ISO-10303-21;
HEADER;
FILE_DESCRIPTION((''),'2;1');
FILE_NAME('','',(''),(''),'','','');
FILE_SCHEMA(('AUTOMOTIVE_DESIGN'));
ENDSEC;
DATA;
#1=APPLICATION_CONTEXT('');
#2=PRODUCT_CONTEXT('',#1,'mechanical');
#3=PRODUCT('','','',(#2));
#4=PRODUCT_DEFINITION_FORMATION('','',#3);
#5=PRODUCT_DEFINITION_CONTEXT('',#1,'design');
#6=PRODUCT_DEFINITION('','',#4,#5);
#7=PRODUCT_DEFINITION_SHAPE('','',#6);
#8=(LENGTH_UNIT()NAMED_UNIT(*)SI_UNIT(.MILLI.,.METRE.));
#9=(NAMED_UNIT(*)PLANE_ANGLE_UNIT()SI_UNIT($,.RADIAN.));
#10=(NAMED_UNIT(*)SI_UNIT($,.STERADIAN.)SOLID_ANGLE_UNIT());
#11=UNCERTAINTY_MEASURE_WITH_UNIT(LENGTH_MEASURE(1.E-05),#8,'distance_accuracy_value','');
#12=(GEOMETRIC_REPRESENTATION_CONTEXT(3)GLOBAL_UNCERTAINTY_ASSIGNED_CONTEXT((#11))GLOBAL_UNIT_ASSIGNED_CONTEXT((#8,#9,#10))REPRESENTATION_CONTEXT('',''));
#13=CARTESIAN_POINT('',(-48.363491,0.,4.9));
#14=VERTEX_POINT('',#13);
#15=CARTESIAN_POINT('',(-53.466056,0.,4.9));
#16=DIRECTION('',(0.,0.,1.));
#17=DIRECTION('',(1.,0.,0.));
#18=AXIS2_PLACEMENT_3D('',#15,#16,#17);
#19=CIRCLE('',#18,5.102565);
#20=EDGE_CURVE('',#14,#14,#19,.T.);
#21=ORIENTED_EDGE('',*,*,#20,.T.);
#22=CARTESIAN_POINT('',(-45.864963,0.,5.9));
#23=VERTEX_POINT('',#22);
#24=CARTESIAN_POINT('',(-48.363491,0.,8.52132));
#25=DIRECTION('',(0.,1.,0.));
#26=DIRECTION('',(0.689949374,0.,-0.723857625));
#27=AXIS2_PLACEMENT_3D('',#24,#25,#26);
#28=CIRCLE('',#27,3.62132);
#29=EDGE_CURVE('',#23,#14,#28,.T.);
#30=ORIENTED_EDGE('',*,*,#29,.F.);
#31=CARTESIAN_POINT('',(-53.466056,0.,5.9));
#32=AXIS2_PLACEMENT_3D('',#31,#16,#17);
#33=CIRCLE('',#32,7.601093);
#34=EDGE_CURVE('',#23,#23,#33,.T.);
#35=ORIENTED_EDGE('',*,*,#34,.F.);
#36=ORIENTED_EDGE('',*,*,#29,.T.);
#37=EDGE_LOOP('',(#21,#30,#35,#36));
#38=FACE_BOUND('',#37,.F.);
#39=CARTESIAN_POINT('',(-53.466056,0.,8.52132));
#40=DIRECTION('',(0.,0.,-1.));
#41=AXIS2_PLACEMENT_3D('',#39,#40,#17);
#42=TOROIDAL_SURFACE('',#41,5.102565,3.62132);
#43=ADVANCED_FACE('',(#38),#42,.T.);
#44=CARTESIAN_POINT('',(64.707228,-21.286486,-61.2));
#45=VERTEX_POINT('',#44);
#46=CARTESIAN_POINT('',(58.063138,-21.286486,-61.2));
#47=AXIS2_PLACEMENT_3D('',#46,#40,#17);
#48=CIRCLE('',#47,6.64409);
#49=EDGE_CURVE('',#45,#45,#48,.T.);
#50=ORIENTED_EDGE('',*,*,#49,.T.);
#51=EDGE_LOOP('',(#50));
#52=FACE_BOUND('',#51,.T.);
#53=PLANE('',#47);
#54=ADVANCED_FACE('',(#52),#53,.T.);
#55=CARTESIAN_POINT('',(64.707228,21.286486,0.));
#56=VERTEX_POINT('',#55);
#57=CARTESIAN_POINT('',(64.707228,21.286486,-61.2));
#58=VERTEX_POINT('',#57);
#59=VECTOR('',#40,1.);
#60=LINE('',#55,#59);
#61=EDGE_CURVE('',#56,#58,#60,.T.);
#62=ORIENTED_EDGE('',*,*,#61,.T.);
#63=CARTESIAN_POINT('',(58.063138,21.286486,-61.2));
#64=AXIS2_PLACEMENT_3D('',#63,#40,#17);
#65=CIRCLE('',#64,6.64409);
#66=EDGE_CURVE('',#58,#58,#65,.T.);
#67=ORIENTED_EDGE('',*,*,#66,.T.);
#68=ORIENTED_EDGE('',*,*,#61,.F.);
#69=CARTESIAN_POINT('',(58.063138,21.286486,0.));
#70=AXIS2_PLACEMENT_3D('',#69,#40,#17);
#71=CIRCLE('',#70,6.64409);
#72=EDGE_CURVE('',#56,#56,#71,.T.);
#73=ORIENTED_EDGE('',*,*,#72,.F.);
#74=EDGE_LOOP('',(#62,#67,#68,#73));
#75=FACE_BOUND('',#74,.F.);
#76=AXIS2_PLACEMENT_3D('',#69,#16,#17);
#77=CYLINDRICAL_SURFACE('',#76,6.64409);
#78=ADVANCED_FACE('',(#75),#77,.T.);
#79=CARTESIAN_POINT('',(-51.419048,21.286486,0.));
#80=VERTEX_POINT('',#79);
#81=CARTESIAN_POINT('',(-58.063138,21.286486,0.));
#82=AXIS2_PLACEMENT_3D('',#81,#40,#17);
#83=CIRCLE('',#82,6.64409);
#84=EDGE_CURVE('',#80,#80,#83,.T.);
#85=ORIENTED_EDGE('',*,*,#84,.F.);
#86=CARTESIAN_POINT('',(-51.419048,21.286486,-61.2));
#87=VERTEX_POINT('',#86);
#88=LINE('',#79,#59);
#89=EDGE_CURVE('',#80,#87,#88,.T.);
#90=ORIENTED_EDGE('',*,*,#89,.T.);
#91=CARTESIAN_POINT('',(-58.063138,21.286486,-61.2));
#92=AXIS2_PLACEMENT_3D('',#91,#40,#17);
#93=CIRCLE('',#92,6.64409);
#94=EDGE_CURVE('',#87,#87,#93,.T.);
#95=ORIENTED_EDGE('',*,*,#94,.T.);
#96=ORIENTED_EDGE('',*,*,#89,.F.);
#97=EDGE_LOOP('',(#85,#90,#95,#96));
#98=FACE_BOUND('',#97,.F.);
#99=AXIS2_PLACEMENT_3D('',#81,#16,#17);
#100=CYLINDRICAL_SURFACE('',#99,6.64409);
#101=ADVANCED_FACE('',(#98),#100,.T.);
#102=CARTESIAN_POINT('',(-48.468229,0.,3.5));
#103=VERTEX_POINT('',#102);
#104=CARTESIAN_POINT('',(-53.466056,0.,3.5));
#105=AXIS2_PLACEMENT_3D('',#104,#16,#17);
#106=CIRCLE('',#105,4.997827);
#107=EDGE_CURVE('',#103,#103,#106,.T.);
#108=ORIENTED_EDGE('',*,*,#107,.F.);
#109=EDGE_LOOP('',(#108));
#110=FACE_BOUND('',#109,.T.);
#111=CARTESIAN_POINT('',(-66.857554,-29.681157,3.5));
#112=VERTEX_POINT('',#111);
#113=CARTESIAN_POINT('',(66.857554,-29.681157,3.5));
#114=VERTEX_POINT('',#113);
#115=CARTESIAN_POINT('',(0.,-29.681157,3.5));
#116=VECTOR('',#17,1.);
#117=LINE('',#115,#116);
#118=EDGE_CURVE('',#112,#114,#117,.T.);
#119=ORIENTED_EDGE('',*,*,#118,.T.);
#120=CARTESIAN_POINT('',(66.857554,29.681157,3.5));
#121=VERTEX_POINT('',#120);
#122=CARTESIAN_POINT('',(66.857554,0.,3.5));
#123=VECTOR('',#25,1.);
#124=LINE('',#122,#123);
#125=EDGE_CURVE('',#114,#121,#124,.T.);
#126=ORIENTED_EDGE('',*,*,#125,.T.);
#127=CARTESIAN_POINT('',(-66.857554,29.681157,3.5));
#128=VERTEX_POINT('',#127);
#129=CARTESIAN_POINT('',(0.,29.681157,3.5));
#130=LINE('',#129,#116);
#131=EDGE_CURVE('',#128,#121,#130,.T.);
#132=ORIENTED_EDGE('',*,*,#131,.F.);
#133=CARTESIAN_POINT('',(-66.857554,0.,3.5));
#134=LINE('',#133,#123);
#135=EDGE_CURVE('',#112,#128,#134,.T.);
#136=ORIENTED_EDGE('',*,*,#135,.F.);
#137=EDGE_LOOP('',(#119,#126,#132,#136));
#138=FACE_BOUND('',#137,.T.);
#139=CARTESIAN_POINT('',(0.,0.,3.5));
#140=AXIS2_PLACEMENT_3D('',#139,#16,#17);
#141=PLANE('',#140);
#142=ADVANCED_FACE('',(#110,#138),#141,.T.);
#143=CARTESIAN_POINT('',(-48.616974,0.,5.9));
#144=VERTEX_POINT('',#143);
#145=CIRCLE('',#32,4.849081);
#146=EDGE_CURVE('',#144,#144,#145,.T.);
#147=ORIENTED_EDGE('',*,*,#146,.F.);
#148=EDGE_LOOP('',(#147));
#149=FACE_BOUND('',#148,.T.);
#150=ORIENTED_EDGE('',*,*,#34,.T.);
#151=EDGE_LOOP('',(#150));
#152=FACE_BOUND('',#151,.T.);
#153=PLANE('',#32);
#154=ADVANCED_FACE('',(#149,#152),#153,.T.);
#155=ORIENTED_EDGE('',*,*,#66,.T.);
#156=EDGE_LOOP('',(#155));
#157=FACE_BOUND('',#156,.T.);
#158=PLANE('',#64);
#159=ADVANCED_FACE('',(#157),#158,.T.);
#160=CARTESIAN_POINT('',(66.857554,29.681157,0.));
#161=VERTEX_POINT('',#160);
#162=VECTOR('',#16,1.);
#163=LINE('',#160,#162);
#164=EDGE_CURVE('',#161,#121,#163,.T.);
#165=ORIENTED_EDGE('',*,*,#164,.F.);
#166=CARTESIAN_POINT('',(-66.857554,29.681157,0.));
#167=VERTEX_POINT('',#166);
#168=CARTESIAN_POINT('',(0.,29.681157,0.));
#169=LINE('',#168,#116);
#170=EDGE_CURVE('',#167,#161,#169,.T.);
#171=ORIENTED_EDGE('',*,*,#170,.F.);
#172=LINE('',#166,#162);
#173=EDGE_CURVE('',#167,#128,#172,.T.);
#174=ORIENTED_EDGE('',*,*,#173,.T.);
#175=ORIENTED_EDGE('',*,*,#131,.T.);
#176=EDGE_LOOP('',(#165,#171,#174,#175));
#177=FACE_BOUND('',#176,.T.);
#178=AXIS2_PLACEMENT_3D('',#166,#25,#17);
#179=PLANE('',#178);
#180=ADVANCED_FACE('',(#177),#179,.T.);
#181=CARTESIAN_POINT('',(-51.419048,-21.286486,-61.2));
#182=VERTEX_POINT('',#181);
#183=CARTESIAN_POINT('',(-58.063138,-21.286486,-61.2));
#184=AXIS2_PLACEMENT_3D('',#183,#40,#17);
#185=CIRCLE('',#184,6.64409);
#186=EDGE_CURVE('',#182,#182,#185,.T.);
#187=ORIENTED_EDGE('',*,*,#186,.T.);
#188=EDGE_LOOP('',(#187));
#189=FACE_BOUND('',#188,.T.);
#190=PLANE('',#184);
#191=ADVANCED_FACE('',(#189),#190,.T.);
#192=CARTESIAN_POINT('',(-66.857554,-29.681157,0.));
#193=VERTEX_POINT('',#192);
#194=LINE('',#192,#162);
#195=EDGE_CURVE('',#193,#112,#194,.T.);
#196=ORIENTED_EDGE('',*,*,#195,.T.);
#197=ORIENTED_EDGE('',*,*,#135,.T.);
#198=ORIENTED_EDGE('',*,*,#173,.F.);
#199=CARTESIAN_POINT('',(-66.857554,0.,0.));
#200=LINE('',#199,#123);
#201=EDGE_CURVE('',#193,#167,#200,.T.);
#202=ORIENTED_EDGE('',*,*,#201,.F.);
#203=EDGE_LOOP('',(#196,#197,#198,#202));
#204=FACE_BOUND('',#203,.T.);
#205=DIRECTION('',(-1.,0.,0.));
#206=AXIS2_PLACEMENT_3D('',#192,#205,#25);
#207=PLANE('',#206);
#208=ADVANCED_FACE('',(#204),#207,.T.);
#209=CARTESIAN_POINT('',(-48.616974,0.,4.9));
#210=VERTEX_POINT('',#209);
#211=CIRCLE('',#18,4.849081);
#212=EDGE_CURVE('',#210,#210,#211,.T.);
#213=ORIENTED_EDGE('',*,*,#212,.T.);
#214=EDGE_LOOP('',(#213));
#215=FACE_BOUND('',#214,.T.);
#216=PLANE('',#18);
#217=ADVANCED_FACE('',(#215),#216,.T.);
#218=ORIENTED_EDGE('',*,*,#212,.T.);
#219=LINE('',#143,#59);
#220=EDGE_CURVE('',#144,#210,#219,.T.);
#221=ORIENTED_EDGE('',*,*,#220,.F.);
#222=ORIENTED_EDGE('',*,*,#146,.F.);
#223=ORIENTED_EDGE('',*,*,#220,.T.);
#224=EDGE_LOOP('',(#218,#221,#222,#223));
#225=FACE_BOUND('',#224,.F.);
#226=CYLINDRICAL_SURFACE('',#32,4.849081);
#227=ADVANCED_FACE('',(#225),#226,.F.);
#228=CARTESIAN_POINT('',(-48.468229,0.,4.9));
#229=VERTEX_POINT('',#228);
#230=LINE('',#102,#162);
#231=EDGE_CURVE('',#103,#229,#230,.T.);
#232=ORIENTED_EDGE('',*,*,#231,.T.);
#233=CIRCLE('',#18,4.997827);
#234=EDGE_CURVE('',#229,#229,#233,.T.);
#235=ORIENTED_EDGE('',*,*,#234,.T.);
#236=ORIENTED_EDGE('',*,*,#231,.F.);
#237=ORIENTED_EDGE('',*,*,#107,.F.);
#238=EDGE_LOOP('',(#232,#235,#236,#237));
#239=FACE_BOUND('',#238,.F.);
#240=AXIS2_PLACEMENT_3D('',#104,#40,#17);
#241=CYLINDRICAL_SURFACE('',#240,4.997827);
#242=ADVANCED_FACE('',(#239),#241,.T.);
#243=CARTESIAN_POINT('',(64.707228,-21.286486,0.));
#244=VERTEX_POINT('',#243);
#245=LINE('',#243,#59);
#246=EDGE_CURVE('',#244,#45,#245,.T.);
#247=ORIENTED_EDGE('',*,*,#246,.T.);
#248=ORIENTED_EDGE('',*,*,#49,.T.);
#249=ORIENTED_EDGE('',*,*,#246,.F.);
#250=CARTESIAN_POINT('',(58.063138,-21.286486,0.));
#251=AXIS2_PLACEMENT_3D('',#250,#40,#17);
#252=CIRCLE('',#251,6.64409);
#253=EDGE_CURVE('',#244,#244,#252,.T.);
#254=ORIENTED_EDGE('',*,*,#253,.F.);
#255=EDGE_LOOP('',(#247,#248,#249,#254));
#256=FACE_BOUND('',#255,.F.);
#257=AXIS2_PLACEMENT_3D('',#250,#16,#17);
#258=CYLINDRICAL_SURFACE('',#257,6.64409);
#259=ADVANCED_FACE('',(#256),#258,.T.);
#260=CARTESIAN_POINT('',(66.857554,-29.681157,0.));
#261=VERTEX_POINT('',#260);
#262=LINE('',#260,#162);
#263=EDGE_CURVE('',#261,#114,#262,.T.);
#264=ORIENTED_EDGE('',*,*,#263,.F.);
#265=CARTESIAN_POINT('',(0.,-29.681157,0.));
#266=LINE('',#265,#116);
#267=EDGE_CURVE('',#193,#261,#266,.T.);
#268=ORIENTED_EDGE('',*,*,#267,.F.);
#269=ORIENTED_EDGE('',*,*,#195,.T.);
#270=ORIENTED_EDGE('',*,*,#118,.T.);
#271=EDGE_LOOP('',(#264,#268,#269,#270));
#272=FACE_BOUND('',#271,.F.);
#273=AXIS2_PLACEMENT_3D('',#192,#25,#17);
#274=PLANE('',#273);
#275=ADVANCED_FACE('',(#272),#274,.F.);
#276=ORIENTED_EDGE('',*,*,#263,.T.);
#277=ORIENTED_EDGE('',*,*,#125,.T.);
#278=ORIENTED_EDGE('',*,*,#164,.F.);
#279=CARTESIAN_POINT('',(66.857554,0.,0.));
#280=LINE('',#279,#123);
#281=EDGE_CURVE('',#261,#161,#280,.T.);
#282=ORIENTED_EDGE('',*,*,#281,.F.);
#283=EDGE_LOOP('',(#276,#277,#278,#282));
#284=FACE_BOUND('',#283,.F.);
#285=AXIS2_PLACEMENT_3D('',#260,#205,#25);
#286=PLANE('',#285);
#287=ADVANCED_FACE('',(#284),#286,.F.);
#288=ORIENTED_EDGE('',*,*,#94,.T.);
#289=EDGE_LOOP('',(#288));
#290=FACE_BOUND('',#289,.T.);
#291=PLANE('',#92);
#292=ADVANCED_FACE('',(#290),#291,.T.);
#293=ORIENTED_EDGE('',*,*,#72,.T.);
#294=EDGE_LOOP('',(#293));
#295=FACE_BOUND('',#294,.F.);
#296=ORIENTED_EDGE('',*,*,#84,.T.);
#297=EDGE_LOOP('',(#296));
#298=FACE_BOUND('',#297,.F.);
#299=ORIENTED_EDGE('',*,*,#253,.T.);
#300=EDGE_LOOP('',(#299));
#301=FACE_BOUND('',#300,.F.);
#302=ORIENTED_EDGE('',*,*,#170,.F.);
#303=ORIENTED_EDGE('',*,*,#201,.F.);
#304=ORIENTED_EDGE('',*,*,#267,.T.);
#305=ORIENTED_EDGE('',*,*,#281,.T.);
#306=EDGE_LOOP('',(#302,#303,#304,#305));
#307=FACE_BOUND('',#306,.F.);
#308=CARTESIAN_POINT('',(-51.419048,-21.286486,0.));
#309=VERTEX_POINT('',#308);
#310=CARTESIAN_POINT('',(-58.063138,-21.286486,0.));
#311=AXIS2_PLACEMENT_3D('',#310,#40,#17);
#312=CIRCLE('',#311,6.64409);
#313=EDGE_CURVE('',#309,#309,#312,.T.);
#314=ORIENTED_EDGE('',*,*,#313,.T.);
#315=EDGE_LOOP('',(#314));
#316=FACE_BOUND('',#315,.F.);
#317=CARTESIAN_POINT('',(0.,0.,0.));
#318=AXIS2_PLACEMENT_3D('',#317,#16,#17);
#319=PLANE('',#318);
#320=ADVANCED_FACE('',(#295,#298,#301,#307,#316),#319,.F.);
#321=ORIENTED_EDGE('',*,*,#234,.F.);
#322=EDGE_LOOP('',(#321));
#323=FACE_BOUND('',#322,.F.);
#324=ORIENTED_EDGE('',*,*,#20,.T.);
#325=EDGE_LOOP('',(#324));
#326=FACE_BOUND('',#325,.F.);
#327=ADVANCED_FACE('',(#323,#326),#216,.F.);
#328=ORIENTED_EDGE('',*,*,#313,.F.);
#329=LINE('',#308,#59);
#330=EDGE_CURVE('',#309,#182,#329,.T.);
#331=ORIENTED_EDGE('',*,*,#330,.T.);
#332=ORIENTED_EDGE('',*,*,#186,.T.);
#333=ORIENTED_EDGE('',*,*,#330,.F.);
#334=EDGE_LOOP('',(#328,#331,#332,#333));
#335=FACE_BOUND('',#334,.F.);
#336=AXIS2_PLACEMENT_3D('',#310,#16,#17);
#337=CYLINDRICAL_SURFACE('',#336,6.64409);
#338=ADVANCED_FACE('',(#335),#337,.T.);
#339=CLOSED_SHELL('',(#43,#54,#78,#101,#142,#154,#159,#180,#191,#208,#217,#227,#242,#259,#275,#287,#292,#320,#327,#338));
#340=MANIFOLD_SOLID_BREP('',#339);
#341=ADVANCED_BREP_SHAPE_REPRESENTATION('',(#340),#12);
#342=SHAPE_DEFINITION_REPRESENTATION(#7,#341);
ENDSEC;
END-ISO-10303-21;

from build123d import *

# Parameters (mm, degrees)
F0_W      = 133.715108037
F0_H      = 59.3623146415
F1_DEPTH  = 3.5
F2_R      = 6.6440898667
F3_DEPTH  = 61.2
F4_R      = 4.997826556
F5_DEPTH  = 1.4
F6_R      = 7.6010927322
F7_DEPTH  = 1
F9_R      = 4.8490813771
F10_DEPTH = 1


# Not quite as in the source:
# - a fillet or chamfer that OpenCascade refuses, or shapes differently, is made with other operations: its cross-section is extruded or revolved along the edge and cut away or added


with BuildPart() as f1:
    # F0 (on Top) → F1 (new body)
    with BuildSketch(Plane.XY):
        Rectangle(F0_W, F0_H)
    extrude(amount=F1_DEPTH)

    # F2 (on face) → F3 (join)
    with BuildSketch(Plane(origin=(0, 0, 0), x_dir=(1, 0, 0), z_dir=(0, 0, -1))):
        with Locations((-58.0631382763, 21.2864857167)):
            Circle(F2_R)
        with Locations((-58.0631382763, -21.2864857167)):
            Circle(F2_R)
        with Locations((58.0631382763, 21.2864857167)):
            Circle(F2_R)
        with Locations((58.0631382763, -21.2864857167)):
            Circle(F2_R)
    extrude(amount=F3_DEPTH)

    # F4 (on face) → F5 (join)
    with BuildSketch(Plane.XY.offset(3.5)):
        with Locations((-53.4660555422, 0)):
            Circle(F4_R)
    extrude(amount=F5_DEPTH)

    # F6 (on face) → F7 (join)
    with BuildSketch(Plane.XY.offset(4.9)):
        with Locations((-53.4660555422, 0)):
            Circle(F6_R)
    extrude(amount=F7_DEPTH)

    # F8: fillet of radius 3.6213203436 on 1 edges, made by hand

    # F8_s1 → F8_t2 (revolve, cut)
    with BuildSketch(Plane.XZ):
        with BuildLine():
            ThreePointArc((-45.86496281, 5.9), (-47.0178827806, 5.1592821435), (-48.3634905139, 4.9))
            Line((-48.3634905139, 4.9), (-45.86496281, 4.9))
            Line((-45.86496281, 4.9), (-45.86496281, 5.9))
        make_face()
    revolve(axis=Axis((-53.4660555422, 0, 4.9), (0, 0, 1)), mode=Mode.SUBTRACT)

    # F9 (on face) → F10 (cut)
    with BuildSketch(Plane.XY.offset(5.9)):
        with Locations((-53.4660555422, 0)):
            Circle(F9_R)
    extrude(amount=-F10_DEPTH, mode=Mode.SUBTRACT)


solid = f1.part
